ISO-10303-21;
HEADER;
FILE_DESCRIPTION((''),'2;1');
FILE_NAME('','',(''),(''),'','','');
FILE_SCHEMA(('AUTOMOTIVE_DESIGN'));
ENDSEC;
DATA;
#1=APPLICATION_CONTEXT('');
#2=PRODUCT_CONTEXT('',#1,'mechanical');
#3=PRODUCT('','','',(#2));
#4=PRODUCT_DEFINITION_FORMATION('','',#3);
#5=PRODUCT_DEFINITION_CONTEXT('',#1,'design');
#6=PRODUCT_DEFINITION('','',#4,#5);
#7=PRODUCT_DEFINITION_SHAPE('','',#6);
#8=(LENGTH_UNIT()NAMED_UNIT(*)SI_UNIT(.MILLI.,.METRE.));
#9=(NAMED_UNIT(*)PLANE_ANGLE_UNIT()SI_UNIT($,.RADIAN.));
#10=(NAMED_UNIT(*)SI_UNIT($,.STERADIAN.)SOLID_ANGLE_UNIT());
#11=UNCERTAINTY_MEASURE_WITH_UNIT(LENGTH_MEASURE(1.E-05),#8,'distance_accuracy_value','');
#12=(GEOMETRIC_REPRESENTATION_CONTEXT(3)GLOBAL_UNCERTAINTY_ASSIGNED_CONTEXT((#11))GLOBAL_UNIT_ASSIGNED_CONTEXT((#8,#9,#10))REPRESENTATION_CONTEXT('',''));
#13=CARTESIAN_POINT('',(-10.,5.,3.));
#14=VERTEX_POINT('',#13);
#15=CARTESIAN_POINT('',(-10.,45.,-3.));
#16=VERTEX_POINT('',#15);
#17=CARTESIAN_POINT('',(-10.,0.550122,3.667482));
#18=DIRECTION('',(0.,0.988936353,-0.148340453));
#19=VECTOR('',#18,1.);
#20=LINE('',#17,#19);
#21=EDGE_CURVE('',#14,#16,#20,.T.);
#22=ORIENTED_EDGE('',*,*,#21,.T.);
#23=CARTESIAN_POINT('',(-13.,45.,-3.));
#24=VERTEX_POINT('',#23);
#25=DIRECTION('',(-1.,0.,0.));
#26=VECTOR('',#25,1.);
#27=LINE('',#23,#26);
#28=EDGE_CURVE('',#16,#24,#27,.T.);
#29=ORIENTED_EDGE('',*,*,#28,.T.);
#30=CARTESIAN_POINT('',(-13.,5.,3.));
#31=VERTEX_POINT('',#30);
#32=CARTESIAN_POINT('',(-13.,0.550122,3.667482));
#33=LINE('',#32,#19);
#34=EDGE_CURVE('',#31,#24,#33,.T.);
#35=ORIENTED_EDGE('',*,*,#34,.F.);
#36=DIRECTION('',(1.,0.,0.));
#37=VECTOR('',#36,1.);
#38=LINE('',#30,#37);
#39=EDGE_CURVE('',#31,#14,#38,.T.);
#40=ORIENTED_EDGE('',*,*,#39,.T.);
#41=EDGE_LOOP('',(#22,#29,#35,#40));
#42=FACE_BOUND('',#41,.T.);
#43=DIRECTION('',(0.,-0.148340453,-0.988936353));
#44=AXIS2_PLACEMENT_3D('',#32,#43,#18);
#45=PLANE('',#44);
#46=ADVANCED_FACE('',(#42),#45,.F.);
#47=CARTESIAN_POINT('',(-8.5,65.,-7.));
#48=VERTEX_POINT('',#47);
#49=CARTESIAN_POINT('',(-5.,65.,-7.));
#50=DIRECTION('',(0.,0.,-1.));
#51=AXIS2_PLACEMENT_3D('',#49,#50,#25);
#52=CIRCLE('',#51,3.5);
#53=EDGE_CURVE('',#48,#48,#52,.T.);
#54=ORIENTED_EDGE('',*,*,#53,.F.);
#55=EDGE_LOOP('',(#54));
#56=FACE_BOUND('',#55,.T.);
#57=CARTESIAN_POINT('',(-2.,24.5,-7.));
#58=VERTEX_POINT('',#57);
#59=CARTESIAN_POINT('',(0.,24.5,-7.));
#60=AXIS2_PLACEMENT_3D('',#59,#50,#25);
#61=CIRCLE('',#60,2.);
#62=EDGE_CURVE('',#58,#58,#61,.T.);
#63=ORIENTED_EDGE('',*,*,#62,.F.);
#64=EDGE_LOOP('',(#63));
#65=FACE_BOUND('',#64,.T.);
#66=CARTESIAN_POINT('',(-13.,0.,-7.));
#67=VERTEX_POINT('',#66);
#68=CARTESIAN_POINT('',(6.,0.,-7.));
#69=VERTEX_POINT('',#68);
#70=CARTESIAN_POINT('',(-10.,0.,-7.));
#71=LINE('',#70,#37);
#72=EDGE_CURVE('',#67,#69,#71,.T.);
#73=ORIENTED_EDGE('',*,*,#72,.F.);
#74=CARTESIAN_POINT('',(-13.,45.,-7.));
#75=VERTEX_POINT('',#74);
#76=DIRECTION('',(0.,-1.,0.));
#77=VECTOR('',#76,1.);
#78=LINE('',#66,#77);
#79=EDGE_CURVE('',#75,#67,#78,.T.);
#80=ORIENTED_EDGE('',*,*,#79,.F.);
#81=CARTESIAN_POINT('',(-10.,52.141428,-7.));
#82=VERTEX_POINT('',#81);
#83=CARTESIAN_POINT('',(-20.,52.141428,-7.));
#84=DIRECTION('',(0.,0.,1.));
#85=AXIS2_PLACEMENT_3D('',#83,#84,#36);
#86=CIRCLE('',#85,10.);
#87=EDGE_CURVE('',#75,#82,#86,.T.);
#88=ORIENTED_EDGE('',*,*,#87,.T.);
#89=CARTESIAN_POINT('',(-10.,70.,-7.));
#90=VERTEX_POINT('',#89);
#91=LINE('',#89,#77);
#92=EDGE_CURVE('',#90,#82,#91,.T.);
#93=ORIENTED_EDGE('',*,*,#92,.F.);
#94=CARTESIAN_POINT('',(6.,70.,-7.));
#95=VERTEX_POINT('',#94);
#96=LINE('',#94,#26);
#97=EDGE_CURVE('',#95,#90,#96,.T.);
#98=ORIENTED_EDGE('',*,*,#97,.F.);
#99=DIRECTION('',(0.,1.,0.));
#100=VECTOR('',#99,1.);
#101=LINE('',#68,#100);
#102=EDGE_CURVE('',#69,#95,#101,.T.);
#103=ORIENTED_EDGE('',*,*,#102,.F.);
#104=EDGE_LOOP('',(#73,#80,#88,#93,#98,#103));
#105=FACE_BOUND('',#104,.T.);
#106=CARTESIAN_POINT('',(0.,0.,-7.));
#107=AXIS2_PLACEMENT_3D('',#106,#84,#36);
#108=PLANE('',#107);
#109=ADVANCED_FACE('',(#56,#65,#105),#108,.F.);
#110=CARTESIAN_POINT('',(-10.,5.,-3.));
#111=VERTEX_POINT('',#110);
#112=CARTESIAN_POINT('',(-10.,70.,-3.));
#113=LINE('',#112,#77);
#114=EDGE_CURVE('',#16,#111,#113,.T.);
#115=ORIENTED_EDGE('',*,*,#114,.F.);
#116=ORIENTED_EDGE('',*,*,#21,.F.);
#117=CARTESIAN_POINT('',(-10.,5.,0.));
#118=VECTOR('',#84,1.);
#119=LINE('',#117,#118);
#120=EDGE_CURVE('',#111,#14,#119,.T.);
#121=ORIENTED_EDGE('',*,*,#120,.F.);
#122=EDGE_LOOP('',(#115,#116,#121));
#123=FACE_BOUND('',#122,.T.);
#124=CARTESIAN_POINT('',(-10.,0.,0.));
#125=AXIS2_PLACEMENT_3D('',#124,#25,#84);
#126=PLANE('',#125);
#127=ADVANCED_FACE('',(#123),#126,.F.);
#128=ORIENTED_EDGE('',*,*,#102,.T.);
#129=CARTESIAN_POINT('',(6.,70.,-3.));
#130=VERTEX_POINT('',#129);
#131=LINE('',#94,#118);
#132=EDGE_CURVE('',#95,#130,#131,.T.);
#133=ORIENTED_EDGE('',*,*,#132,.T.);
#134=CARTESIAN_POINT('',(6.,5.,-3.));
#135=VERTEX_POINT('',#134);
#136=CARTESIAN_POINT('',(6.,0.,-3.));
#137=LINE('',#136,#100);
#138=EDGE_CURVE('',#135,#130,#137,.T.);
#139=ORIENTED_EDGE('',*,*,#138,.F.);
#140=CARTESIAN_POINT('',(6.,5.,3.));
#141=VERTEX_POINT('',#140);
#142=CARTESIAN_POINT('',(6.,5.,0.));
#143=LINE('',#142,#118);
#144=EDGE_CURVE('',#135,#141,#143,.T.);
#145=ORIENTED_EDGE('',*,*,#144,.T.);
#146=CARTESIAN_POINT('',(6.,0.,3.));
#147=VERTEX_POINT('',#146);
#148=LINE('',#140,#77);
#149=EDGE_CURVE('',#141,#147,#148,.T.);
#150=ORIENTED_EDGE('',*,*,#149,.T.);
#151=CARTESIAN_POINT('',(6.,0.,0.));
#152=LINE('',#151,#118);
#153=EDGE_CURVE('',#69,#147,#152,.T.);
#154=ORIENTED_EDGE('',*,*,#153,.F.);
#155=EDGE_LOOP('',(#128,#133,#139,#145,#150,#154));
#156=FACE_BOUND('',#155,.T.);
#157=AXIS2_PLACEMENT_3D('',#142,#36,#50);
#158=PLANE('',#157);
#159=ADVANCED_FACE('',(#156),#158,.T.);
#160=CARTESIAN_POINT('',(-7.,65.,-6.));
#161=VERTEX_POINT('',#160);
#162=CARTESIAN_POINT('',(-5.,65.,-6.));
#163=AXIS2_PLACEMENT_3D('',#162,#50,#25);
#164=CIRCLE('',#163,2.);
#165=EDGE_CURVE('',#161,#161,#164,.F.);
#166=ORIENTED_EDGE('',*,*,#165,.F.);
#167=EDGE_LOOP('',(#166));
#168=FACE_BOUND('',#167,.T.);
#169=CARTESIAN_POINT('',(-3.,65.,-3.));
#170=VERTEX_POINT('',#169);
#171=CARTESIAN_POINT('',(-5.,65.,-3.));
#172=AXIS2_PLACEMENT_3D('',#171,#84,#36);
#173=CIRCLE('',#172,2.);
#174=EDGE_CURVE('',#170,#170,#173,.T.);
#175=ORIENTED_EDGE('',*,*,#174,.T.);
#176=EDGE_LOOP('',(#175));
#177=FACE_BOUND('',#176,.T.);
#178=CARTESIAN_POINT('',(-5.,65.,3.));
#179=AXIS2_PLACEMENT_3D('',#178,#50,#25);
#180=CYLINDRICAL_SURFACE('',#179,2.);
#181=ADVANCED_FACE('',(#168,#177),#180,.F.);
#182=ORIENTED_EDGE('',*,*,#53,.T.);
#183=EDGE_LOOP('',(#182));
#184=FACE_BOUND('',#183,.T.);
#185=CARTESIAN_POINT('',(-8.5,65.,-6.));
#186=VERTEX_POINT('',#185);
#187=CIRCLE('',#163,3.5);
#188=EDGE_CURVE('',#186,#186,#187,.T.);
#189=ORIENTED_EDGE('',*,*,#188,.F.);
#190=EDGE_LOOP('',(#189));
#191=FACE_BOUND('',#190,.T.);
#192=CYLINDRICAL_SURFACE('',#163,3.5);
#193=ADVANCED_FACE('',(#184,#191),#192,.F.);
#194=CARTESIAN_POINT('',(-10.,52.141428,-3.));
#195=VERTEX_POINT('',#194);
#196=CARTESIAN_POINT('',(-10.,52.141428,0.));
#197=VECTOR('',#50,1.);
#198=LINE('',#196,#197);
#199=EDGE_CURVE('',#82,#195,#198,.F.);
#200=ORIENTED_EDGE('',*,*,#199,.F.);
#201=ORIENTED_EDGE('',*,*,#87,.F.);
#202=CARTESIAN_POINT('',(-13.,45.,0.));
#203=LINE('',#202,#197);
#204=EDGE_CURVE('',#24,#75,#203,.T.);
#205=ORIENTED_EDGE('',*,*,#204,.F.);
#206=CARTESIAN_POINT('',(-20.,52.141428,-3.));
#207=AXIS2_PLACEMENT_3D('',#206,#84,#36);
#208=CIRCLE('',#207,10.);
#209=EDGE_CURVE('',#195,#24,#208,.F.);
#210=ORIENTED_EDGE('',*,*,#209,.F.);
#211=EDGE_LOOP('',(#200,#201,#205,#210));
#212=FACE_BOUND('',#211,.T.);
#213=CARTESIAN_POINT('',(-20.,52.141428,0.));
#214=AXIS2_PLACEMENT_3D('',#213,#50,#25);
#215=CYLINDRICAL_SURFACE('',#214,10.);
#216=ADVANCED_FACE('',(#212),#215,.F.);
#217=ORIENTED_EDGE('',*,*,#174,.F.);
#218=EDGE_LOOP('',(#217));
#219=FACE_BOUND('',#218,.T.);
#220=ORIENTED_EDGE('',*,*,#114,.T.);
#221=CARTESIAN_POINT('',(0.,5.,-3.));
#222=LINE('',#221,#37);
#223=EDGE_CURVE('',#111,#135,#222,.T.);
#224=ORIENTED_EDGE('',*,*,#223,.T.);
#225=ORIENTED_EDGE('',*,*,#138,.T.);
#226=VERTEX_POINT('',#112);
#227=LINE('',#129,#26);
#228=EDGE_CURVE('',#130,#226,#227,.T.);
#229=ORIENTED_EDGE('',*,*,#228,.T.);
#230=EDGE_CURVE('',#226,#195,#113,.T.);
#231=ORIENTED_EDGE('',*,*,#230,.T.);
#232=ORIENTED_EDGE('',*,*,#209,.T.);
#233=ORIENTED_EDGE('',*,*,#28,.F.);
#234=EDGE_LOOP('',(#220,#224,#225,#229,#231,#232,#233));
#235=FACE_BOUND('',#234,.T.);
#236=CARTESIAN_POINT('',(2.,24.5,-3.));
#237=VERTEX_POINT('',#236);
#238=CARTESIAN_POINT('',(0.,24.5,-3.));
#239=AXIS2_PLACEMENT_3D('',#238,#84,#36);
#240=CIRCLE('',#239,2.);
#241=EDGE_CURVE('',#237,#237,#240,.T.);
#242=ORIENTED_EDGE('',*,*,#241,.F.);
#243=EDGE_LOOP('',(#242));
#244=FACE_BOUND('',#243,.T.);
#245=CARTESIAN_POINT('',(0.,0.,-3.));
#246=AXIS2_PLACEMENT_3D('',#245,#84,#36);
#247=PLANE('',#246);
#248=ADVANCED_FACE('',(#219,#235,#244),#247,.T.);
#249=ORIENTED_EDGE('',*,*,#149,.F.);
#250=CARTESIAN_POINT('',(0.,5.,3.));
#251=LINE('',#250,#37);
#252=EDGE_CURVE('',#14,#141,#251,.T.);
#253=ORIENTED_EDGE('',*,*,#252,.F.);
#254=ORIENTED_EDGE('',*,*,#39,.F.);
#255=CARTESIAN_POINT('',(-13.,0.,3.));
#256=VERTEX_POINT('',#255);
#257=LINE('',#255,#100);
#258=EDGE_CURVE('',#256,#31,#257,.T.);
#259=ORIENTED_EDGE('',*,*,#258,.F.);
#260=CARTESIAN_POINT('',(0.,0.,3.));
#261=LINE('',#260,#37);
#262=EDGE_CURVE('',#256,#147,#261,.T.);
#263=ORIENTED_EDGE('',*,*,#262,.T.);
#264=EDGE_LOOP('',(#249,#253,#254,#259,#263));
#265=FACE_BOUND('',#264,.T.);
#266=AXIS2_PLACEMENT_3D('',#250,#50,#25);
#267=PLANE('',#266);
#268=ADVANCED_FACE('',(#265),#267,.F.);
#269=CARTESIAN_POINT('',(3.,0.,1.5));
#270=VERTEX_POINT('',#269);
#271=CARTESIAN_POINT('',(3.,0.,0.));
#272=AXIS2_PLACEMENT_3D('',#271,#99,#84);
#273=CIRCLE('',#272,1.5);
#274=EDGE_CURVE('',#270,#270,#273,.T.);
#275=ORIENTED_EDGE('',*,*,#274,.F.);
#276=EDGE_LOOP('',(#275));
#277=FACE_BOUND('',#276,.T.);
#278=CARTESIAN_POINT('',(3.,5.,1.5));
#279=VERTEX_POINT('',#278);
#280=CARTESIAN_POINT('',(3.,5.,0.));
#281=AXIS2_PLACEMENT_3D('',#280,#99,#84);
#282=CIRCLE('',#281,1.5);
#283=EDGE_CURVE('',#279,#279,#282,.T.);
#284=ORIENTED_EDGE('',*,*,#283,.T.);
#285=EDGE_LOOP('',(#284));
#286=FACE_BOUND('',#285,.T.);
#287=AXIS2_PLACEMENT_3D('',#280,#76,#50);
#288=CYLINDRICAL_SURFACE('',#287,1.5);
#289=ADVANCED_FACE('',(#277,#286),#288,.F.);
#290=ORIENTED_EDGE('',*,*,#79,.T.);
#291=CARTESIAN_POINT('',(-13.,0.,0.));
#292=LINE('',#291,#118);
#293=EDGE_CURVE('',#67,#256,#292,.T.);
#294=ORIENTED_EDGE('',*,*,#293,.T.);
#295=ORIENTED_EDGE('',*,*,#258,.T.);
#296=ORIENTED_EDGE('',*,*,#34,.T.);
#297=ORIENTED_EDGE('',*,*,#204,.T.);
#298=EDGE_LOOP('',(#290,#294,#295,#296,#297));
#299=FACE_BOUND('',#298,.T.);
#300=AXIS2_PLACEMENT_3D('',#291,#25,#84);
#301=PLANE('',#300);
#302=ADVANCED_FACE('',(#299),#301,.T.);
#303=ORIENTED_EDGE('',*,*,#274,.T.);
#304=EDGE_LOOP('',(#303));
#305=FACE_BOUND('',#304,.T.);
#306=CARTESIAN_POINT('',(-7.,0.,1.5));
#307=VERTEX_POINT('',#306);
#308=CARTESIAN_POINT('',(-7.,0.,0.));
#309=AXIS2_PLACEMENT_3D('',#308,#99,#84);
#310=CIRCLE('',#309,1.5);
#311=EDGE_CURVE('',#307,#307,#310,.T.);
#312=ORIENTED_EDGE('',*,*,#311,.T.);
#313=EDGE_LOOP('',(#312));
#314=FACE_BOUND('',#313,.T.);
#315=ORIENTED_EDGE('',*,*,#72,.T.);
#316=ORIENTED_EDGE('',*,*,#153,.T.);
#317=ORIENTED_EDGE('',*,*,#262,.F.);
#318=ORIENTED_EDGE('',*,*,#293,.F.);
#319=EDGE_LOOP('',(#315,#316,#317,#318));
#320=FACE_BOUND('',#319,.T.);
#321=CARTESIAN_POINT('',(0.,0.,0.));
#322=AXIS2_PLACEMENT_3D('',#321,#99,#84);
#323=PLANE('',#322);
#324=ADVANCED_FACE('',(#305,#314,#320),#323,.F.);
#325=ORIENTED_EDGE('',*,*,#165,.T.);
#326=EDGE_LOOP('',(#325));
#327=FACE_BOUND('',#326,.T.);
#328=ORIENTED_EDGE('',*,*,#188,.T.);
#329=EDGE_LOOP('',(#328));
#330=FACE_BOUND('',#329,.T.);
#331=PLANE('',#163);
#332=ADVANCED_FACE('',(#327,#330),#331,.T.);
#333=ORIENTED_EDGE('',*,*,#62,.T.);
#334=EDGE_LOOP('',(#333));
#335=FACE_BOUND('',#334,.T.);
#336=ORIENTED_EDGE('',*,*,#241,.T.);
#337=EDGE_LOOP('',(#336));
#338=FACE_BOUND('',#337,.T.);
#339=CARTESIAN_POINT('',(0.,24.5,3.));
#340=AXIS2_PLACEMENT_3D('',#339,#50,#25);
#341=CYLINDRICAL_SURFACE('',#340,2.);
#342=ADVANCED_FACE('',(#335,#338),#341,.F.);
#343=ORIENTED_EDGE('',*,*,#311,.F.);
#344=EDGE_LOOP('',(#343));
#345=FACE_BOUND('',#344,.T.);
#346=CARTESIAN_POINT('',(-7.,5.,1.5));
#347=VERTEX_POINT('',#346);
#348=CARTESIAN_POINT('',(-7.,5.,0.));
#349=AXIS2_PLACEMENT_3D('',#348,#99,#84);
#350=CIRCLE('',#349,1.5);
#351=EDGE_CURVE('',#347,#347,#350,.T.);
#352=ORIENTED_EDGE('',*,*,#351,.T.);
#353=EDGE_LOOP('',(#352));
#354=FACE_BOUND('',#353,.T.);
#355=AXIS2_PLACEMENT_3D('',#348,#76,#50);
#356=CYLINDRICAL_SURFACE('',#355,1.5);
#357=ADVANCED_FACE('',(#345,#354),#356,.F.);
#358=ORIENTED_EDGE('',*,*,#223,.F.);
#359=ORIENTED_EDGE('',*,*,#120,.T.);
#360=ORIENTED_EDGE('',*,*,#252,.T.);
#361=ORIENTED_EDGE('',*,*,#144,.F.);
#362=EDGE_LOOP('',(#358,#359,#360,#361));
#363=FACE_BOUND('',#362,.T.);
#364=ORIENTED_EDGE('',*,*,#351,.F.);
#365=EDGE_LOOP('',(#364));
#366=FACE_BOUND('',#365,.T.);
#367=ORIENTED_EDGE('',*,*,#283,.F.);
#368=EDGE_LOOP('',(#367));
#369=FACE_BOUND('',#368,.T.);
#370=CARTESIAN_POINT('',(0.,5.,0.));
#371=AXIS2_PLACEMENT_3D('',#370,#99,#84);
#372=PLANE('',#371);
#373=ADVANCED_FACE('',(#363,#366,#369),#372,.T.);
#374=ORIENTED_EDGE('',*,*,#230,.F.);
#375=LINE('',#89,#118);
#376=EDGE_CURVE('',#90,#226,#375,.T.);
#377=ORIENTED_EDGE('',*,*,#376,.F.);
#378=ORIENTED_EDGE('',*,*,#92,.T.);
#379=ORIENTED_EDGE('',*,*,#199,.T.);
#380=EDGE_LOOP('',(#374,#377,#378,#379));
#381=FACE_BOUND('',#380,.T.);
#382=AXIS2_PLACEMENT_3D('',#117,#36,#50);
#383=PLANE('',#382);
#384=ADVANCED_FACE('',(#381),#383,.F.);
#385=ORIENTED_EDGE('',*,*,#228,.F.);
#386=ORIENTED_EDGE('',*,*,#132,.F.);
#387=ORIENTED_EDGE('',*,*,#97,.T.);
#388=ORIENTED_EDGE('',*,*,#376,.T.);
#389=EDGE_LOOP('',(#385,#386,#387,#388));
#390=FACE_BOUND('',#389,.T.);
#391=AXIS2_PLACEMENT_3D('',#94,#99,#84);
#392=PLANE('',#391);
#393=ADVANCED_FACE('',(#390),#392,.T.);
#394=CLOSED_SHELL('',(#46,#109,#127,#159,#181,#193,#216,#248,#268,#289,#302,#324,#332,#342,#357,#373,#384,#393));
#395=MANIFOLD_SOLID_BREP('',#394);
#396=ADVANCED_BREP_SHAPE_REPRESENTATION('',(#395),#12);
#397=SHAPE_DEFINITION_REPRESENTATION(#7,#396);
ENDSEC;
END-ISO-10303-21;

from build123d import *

# Parameters (mm, degrees)
SKETCH_1_W          = 16
SKETCH_1_H          = 6
SKETCH_1_R          = 1.5
EXTRUDE_1_DEPTH     = 5
SKETCH_2_W          = 16
SKETCH_2_H          = 70
EXTRUDE_2_DEPTH     = 4
SKETCH_3_R          = 2
CUT_EXTRUDE_1_DEPTH = 72.414284285
SKETCH_4_R          = 2
CUT_EXTRUDE_2_DEPTH = 72.414284285
SKETCH_5_R          = 3.5
CUT_EXTRUDE_3_DEPTH = 1
EXTRUDE_3_DEPTH     = 3
FILLET_1_R          = 10


with BuildPart() as part:
    # 草图1 → 凸台-拉伸1 (new body)
    with BuildSketch(Plane(origin=(0, 0, 0), x_dir=(1, 0, 0), z_dir=(0, 1, 0))):
        with Locations((-2, 0)):
            Rectangle(SKETCH_1_W, SKETCH_1_H)
        with Locations(Location((-7, 0, 0), (0, 0, 270))):
            Circle(SKETCH_1_R, mode=Mode.SUBTRACT)
        with Locations(Location((3, 0, 0), (0, 0, 270))):
            Circle(SKETCH_1_R, mode=Mode.SUBTRACT)
    extrude(amount=EXTRUDE_1_DEPTH)

    # 草图2 → 凸台-拉伸2 (add)
    with BuildSketch(Plane(origin=(0, 0, -3), x_dir=(-1, 0, 0), z_dir=(0, 0, -1))):
        with Locations((2, 35)):
            Rectangle(SKETCH_2_W, SKETCH_2_H)
    extrude(amount=EXTRUDE_2_DEPTH)

    # 草图3 → 切除-拉伸1 (cut, through all)
    with BuildSketch(Plane(origin=(0, 0, -7), x_dir=(-1, 0, 0), z_dir=(0, 0, -1))):
        with Locations((5, 65)):
            Circle(SKETCH_3_R)
    extrude(amount=-CUT_EXTRUDE_1_DEPTH, mode=Mode.SUBTRACT)

    # 草图4 → 切除-拉伸2 (cut, through all)
    with BuildSketch(Plane(origin=(0, 0, -7), x_dir=(-1, 0, 0), z_dir=(0, 0, -1))):
        with Locations((0, 24.5)):
            Circle(SKETCH_4_R)
    extrude(amount=-CUT_EXTRUDE_2_DEPTH, mode=Mode.SUBTRACT)

    # 草图5 → 切除-拉伸3 (cut)
    with BuildSketch(Plane(origin=(0, 0, -7), x_dir=(-1, 0, 0), z_dir=(0, 0, -1))):
        with Locations((5, 65)):
            Circle(SKETCH_5_R)
    extrude(amount=-CUT_EXTRUDE_3_DEPTH, mode=Mode.SUBTRACT)

    # 草图6 → 凸台-拉伸3 (add)
    with BuildSketch(Plane.ZY.offset(10)):
        Polygon((-3, 45), (-3, 5), (3, 5), align=None)
        Polygon((3, 5), (-3, 5), (-3, 45), (-7, 45), (-7, 0), (3, 0), align=None)
    extrude(amount=EXTRUDE_3_DEPTH)

    # 圆角1
    # the kernel refuses this fillet: 10 mm, written as the material it adds along each edge
    with BuildSketch(Plane(origin=(-10, 45, -3), x_dir=(-1, 0, 0), z_dir=(0, 0, -1))) as fillet_1_piece_1:
        with BuildLine():
            CenterArc((10, 7.141428429), FILLET_1_R, 180, 45.572995999)
            Line((0, 7.141428429), (0, 0))
            Line((0, 0), (3, 0))
        make_face()
    extrude(amount=4)


solid = part.part
